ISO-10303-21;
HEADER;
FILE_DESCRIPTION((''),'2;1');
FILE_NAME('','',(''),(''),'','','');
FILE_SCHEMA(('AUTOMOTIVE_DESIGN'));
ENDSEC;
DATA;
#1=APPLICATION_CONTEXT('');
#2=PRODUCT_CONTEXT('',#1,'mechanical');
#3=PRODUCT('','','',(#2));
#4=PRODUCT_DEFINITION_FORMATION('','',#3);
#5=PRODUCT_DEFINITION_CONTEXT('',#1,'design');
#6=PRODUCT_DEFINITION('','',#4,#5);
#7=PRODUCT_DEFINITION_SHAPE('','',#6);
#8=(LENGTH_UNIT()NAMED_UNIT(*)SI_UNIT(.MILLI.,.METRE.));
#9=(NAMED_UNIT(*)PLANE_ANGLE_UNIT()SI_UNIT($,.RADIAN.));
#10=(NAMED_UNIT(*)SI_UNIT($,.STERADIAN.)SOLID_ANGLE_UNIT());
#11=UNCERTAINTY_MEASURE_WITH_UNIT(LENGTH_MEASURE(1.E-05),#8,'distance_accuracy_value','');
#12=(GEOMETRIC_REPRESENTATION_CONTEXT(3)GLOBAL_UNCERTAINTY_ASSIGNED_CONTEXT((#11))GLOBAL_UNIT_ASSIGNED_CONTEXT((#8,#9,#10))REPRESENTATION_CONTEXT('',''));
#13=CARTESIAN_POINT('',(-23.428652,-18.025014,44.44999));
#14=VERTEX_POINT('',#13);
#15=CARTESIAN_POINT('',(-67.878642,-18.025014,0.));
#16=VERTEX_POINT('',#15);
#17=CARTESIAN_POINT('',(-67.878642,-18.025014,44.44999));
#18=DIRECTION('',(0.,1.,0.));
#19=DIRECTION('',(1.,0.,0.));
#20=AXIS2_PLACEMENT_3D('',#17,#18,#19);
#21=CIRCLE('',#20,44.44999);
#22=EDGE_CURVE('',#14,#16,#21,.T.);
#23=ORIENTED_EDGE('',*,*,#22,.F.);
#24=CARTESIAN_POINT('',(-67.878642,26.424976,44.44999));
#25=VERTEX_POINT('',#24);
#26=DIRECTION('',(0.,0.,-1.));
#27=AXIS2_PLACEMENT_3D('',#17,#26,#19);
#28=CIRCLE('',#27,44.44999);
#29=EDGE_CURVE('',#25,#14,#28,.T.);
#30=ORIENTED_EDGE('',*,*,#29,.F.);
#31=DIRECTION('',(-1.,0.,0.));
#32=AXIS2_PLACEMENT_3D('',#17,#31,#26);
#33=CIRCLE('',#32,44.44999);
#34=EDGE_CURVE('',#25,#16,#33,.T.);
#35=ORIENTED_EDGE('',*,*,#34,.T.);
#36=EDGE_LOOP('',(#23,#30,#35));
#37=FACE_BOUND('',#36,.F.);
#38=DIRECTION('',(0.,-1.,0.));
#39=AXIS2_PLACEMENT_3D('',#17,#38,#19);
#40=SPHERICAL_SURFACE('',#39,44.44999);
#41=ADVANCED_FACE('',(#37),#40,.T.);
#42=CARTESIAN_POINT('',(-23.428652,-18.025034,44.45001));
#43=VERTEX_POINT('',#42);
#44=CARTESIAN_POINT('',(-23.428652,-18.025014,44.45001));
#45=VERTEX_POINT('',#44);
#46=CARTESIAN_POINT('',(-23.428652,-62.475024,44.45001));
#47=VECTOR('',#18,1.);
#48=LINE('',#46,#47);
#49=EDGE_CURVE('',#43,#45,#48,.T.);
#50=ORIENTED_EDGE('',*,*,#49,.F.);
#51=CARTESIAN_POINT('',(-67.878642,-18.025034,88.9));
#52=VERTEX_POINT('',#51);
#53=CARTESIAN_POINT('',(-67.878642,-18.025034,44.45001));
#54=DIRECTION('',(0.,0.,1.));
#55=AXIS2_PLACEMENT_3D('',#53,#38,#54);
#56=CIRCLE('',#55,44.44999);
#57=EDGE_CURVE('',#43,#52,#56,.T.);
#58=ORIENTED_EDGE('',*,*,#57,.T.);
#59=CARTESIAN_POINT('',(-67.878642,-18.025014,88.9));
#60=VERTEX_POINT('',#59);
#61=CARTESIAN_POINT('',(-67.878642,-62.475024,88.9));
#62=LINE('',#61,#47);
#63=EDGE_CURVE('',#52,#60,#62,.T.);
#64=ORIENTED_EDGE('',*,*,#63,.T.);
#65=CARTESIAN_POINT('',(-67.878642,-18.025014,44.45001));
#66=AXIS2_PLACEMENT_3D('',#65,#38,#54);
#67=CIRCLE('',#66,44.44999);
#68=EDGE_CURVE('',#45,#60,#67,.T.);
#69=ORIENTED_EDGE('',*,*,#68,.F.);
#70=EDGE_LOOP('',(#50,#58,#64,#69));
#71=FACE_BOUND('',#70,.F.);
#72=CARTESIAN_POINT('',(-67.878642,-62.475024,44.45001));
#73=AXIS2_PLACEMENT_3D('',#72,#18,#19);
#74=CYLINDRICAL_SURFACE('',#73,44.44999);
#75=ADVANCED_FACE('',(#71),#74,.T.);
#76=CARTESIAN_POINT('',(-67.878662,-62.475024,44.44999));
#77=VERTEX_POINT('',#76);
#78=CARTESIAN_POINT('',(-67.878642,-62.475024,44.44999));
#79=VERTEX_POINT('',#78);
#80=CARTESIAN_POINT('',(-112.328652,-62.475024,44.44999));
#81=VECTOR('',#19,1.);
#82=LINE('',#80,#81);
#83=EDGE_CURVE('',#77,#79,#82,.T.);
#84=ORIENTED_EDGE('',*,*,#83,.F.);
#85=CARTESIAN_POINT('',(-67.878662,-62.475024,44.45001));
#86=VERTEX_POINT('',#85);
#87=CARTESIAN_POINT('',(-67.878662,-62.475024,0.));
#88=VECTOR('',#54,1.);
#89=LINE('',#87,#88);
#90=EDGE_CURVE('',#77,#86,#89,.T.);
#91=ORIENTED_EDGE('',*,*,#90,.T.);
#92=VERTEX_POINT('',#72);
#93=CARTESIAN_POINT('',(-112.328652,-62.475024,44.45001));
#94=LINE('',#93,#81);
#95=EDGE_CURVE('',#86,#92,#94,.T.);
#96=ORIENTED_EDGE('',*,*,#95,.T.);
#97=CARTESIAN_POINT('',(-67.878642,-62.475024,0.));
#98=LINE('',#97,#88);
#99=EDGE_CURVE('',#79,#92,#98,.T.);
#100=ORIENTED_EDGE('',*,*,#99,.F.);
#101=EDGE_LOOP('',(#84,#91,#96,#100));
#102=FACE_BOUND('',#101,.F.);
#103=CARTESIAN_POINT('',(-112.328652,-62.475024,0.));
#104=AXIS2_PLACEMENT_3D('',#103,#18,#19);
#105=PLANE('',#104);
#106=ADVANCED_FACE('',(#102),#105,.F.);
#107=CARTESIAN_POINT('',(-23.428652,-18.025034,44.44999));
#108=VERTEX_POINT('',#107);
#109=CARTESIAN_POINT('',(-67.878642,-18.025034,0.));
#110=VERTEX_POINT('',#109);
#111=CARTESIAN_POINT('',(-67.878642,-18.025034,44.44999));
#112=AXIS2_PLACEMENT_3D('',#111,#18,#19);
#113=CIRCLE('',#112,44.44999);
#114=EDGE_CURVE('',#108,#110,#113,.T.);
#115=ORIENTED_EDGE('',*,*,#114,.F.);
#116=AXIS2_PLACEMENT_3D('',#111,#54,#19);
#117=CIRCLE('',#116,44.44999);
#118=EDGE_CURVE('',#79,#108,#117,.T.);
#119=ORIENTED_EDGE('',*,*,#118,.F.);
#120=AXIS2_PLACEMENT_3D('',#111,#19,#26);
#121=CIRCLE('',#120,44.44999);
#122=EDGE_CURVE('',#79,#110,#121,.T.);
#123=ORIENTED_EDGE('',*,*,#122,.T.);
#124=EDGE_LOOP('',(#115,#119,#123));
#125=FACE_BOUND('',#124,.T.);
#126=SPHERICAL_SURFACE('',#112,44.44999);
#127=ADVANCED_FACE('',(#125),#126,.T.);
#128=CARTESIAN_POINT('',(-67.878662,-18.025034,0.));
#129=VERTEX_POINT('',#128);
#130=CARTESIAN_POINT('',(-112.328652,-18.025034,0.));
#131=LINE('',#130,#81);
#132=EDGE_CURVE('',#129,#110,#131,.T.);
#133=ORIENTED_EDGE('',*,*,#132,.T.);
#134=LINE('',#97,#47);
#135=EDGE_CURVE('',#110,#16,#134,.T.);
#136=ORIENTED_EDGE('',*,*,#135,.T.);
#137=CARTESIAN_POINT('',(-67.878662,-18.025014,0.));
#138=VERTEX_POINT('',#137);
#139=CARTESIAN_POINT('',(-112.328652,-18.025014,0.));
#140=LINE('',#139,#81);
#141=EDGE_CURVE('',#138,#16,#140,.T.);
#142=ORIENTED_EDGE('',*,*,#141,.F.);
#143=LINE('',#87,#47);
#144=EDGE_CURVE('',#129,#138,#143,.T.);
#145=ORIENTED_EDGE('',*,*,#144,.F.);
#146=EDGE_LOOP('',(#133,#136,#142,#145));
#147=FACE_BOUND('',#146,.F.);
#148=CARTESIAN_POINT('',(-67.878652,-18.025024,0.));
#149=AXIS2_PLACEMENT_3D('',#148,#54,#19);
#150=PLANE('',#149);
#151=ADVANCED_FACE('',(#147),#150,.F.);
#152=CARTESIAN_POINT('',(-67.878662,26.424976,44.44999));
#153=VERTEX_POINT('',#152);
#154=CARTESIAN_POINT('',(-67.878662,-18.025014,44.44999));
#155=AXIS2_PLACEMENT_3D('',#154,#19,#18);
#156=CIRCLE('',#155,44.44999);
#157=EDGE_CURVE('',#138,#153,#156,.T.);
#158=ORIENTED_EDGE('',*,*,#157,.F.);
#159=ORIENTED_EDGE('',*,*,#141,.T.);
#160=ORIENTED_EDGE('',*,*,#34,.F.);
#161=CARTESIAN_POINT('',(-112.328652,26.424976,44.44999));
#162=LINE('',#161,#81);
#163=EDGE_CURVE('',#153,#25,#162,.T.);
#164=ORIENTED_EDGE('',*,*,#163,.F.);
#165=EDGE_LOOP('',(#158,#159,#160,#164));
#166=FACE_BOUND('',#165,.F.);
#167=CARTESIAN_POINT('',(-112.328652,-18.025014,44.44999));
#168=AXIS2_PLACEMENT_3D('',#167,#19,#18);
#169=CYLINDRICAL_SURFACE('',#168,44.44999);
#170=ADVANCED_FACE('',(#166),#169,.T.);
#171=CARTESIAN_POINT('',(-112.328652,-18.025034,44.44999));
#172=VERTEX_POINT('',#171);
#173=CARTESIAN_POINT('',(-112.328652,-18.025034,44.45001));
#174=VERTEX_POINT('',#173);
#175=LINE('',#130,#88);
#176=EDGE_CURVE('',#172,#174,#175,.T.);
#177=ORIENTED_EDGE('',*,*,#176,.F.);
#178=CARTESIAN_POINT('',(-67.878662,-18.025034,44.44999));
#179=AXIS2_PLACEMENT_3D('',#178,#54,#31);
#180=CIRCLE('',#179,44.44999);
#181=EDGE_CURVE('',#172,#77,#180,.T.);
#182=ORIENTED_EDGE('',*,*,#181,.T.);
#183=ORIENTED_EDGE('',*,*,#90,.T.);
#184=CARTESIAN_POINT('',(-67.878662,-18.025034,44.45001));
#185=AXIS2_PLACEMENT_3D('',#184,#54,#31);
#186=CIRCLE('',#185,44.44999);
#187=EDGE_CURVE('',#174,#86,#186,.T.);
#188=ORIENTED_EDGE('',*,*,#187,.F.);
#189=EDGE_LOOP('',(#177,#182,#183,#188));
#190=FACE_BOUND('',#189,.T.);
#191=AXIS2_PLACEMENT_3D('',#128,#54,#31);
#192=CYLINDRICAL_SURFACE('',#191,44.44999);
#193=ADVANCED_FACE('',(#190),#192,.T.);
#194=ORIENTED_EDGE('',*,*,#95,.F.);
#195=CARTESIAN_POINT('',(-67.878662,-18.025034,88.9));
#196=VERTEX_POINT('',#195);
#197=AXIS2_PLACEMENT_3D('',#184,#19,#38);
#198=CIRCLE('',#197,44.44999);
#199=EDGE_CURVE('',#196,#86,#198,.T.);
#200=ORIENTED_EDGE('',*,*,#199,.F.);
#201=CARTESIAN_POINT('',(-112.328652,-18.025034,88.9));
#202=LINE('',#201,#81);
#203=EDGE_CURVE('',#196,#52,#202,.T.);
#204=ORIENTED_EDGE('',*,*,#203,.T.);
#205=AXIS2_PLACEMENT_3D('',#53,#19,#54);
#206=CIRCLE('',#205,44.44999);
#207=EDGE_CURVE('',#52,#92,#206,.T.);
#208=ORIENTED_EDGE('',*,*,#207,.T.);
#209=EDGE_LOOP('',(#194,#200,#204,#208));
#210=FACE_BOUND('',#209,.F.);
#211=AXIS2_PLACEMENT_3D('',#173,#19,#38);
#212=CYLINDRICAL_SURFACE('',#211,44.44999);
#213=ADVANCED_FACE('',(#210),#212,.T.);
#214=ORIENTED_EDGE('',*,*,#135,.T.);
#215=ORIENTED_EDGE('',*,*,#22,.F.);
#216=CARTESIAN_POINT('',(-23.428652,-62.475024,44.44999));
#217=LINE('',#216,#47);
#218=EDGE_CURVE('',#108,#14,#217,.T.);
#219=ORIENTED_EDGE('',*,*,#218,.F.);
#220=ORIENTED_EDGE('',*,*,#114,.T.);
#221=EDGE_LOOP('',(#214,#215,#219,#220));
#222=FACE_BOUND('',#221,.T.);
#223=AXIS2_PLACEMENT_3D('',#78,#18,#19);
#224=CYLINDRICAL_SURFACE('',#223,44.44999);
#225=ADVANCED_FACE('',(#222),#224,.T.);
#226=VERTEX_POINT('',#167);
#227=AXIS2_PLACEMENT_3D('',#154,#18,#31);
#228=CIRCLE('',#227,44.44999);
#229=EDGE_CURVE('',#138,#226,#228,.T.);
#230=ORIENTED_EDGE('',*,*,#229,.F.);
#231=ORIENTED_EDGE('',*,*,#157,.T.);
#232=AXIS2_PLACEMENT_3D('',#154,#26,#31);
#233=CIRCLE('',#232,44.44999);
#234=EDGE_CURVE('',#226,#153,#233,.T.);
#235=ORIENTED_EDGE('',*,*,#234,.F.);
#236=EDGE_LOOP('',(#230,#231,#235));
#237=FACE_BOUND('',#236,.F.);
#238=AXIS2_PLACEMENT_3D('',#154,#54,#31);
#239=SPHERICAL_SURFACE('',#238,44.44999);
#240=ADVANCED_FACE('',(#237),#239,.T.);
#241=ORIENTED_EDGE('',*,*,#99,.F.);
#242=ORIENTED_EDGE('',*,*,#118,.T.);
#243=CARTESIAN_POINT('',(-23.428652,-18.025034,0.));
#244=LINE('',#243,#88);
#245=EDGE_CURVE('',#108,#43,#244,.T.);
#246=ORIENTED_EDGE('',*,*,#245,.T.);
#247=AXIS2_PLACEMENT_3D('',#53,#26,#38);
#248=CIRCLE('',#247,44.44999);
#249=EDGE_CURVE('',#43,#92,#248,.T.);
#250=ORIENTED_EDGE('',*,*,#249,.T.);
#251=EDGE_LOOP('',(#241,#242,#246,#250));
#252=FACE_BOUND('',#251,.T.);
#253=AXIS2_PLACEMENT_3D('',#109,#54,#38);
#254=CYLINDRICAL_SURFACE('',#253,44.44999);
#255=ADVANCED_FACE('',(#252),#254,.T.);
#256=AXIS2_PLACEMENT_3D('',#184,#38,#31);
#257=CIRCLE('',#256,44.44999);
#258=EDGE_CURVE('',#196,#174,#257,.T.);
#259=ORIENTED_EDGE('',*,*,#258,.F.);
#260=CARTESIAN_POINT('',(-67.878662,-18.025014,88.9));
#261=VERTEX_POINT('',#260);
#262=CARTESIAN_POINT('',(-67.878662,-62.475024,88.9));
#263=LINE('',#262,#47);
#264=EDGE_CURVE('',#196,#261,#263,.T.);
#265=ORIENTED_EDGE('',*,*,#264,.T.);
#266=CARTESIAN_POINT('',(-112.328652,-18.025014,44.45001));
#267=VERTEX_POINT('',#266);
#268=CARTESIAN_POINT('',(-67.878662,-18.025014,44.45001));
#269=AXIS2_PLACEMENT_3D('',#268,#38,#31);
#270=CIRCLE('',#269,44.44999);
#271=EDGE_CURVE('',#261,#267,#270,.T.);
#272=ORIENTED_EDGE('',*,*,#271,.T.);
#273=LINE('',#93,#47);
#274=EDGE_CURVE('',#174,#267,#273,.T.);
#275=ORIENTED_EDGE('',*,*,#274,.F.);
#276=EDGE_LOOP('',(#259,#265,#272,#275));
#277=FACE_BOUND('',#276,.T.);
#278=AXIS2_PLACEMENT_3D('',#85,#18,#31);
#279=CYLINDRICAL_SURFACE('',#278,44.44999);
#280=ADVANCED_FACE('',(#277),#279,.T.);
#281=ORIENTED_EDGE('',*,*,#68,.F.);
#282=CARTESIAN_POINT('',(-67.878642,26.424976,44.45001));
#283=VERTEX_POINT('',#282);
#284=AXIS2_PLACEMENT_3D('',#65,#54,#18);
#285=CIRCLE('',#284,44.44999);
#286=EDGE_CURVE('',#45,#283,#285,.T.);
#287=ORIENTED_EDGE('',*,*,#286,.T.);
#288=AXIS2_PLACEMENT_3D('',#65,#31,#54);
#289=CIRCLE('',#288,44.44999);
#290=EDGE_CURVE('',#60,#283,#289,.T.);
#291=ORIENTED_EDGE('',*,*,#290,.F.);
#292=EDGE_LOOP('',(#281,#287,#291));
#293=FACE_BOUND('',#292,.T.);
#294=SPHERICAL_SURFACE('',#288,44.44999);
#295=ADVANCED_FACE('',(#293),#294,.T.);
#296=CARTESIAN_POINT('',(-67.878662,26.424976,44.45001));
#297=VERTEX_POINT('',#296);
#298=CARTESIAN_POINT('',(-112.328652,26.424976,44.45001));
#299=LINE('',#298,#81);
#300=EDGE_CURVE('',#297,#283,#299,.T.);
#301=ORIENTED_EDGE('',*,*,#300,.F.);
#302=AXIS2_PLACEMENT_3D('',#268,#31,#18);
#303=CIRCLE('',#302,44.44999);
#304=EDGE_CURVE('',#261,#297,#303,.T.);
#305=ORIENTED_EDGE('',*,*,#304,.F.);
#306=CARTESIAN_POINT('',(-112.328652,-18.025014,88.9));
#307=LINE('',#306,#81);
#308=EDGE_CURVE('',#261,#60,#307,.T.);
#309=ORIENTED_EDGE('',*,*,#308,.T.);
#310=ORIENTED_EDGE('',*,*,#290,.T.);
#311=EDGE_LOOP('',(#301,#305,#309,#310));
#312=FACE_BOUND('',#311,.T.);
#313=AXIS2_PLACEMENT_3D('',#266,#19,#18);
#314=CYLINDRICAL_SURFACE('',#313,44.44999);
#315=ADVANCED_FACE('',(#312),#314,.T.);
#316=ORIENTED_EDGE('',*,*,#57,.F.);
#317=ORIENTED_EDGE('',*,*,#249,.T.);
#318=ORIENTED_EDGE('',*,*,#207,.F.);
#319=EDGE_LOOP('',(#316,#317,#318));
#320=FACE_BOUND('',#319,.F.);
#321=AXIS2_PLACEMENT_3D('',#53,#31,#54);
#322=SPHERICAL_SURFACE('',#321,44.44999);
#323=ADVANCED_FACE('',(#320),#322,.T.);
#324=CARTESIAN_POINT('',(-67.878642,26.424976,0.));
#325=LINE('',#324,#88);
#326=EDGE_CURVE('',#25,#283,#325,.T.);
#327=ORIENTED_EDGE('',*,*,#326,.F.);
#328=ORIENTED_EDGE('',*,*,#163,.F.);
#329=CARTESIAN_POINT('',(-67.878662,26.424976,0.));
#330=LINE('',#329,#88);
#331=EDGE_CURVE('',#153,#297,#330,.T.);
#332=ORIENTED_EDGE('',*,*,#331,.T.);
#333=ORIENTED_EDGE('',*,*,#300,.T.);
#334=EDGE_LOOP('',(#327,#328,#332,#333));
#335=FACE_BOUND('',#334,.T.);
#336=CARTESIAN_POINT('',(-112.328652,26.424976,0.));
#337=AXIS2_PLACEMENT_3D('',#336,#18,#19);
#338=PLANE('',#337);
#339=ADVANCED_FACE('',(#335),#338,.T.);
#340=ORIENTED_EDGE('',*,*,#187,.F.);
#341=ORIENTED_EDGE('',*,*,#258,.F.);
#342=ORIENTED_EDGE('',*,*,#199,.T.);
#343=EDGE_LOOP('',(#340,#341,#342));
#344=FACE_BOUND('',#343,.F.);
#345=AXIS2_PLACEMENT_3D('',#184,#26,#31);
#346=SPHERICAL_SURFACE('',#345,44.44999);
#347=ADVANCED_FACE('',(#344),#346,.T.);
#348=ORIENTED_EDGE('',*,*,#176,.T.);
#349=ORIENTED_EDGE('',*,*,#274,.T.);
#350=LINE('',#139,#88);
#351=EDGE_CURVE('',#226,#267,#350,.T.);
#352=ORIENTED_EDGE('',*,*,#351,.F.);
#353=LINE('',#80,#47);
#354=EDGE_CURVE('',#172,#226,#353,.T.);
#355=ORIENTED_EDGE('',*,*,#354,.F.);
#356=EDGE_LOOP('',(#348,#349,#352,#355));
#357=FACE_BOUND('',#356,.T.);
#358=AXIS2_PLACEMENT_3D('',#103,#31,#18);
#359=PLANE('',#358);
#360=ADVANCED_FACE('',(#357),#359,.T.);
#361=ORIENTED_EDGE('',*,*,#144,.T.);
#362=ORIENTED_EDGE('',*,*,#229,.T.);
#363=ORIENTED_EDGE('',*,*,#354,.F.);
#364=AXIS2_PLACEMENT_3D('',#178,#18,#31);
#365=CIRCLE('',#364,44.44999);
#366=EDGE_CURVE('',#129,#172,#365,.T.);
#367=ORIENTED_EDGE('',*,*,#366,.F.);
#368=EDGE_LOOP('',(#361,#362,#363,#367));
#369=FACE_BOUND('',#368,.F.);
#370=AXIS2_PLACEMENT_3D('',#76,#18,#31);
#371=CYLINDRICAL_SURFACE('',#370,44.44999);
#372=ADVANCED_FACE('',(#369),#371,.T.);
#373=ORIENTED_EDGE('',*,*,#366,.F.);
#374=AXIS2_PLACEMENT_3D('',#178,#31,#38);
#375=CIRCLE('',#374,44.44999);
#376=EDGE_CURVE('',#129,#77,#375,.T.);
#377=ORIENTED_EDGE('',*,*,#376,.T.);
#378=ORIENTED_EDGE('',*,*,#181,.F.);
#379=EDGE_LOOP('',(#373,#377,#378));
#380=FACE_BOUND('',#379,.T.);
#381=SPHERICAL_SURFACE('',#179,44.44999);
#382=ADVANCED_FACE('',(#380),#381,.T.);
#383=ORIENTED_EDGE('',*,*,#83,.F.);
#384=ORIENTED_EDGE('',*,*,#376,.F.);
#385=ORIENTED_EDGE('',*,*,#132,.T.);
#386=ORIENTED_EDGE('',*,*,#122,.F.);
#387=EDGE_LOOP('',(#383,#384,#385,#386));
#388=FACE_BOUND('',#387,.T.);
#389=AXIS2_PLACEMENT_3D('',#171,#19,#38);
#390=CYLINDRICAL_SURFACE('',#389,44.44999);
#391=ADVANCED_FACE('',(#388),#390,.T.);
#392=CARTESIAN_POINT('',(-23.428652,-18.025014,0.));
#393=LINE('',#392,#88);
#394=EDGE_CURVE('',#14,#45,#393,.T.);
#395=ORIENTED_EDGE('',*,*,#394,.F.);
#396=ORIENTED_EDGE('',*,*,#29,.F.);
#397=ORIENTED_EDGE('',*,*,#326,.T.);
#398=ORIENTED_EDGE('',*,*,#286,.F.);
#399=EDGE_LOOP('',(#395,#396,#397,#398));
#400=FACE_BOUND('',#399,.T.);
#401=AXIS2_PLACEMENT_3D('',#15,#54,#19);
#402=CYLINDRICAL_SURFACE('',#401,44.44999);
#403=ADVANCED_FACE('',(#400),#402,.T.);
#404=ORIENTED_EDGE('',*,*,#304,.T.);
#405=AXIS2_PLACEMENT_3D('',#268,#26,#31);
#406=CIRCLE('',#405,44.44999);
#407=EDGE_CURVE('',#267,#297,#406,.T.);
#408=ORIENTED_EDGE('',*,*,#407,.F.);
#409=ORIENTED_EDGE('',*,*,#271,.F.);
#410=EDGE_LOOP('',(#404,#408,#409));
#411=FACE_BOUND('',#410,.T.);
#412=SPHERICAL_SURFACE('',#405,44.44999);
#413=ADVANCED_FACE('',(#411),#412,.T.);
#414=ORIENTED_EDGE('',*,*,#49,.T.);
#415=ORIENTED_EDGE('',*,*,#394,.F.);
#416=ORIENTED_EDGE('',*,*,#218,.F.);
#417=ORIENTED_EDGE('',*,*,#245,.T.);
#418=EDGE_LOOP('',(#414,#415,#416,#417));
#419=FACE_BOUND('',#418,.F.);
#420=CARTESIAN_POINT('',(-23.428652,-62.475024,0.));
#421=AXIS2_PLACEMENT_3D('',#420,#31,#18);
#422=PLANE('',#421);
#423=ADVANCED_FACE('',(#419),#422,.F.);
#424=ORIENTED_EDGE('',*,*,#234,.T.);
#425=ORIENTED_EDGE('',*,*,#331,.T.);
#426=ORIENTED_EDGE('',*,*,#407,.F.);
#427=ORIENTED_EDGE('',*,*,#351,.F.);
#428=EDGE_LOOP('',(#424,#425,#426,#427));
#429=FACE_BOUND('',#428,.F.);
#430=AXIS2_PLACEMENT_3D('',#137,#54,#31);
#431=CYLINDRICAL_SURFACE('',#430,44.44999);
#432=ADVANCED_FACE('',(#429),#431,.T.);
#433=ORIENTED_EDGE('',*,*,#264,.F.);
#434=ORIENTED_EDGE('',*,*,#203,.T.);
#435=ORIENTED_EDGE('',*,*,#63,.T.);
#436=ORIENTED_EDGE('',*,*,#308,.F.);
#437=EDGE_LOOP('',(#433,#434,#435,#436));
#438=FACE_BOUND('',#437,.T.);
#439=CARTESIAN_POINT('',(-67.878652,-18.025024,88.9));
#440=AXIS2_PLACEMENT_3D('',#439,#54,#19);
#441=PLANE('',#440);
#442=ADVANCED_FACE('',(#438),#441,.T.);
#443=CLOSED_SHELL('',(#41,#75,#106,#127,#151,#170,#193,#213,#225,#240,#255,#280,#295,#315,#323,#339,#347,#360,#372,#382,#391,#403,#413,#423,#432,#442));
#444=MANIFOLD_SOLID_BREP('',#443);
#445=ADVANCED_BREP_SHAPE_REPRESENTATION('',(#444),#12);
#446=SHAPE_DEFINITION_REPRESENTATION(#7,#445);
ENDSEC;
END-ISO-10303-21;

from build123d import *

# Parameters (mm, degrees)
F0_W     = 88.9
F0_H     = 88.9
F1_DEPTH = 88.9
F2_R     = 44.44999


# Not quite as in the source:
# - a fillet or chamfer is up to 0.001 mm smaller than in the source, because OpenCascade refuses the exact size


with BuildPart() as f1:
    # F0 (on Top) → F1 (new body)
    with BuildSketch(Plane.XY):
        with Locations((-67.8786515405, -18.0250238627)):
            Rectangle(F0_W, F0_H)
    extrude(amount=F1_DEPTH)

    # F2 (radius 44.45 in the source; OpenCascade refuses exactly that, so slightly less here)
    f2_edges = [f1.edges().sort_by_distance(p)[0] for p in [
        (-112.328652, -62.475024, 44.45),
        (-112.328652, 26.424976, 44.45),
        (-112.328652, -18.025024, 88.9),
        (-112.328652, -18.025024, 0),
        (-67.878652, -62.475024, 88.9),
        (-67.878652, 26.424976, 88.9),
        (-23.428652, -18.025024, 88.9),
        (-23.428652, -18.025024, 0),
        (-23.428652, 26.424976, 44.45),
        (-23.428652, -62.475024, 44.45),
        (-67.878652, -62.475024, 0),
        (-67.878652, 26.424976, 0),
    ]]
    fillet(f2_edges, radius=F2_R)


solid = f1.part
